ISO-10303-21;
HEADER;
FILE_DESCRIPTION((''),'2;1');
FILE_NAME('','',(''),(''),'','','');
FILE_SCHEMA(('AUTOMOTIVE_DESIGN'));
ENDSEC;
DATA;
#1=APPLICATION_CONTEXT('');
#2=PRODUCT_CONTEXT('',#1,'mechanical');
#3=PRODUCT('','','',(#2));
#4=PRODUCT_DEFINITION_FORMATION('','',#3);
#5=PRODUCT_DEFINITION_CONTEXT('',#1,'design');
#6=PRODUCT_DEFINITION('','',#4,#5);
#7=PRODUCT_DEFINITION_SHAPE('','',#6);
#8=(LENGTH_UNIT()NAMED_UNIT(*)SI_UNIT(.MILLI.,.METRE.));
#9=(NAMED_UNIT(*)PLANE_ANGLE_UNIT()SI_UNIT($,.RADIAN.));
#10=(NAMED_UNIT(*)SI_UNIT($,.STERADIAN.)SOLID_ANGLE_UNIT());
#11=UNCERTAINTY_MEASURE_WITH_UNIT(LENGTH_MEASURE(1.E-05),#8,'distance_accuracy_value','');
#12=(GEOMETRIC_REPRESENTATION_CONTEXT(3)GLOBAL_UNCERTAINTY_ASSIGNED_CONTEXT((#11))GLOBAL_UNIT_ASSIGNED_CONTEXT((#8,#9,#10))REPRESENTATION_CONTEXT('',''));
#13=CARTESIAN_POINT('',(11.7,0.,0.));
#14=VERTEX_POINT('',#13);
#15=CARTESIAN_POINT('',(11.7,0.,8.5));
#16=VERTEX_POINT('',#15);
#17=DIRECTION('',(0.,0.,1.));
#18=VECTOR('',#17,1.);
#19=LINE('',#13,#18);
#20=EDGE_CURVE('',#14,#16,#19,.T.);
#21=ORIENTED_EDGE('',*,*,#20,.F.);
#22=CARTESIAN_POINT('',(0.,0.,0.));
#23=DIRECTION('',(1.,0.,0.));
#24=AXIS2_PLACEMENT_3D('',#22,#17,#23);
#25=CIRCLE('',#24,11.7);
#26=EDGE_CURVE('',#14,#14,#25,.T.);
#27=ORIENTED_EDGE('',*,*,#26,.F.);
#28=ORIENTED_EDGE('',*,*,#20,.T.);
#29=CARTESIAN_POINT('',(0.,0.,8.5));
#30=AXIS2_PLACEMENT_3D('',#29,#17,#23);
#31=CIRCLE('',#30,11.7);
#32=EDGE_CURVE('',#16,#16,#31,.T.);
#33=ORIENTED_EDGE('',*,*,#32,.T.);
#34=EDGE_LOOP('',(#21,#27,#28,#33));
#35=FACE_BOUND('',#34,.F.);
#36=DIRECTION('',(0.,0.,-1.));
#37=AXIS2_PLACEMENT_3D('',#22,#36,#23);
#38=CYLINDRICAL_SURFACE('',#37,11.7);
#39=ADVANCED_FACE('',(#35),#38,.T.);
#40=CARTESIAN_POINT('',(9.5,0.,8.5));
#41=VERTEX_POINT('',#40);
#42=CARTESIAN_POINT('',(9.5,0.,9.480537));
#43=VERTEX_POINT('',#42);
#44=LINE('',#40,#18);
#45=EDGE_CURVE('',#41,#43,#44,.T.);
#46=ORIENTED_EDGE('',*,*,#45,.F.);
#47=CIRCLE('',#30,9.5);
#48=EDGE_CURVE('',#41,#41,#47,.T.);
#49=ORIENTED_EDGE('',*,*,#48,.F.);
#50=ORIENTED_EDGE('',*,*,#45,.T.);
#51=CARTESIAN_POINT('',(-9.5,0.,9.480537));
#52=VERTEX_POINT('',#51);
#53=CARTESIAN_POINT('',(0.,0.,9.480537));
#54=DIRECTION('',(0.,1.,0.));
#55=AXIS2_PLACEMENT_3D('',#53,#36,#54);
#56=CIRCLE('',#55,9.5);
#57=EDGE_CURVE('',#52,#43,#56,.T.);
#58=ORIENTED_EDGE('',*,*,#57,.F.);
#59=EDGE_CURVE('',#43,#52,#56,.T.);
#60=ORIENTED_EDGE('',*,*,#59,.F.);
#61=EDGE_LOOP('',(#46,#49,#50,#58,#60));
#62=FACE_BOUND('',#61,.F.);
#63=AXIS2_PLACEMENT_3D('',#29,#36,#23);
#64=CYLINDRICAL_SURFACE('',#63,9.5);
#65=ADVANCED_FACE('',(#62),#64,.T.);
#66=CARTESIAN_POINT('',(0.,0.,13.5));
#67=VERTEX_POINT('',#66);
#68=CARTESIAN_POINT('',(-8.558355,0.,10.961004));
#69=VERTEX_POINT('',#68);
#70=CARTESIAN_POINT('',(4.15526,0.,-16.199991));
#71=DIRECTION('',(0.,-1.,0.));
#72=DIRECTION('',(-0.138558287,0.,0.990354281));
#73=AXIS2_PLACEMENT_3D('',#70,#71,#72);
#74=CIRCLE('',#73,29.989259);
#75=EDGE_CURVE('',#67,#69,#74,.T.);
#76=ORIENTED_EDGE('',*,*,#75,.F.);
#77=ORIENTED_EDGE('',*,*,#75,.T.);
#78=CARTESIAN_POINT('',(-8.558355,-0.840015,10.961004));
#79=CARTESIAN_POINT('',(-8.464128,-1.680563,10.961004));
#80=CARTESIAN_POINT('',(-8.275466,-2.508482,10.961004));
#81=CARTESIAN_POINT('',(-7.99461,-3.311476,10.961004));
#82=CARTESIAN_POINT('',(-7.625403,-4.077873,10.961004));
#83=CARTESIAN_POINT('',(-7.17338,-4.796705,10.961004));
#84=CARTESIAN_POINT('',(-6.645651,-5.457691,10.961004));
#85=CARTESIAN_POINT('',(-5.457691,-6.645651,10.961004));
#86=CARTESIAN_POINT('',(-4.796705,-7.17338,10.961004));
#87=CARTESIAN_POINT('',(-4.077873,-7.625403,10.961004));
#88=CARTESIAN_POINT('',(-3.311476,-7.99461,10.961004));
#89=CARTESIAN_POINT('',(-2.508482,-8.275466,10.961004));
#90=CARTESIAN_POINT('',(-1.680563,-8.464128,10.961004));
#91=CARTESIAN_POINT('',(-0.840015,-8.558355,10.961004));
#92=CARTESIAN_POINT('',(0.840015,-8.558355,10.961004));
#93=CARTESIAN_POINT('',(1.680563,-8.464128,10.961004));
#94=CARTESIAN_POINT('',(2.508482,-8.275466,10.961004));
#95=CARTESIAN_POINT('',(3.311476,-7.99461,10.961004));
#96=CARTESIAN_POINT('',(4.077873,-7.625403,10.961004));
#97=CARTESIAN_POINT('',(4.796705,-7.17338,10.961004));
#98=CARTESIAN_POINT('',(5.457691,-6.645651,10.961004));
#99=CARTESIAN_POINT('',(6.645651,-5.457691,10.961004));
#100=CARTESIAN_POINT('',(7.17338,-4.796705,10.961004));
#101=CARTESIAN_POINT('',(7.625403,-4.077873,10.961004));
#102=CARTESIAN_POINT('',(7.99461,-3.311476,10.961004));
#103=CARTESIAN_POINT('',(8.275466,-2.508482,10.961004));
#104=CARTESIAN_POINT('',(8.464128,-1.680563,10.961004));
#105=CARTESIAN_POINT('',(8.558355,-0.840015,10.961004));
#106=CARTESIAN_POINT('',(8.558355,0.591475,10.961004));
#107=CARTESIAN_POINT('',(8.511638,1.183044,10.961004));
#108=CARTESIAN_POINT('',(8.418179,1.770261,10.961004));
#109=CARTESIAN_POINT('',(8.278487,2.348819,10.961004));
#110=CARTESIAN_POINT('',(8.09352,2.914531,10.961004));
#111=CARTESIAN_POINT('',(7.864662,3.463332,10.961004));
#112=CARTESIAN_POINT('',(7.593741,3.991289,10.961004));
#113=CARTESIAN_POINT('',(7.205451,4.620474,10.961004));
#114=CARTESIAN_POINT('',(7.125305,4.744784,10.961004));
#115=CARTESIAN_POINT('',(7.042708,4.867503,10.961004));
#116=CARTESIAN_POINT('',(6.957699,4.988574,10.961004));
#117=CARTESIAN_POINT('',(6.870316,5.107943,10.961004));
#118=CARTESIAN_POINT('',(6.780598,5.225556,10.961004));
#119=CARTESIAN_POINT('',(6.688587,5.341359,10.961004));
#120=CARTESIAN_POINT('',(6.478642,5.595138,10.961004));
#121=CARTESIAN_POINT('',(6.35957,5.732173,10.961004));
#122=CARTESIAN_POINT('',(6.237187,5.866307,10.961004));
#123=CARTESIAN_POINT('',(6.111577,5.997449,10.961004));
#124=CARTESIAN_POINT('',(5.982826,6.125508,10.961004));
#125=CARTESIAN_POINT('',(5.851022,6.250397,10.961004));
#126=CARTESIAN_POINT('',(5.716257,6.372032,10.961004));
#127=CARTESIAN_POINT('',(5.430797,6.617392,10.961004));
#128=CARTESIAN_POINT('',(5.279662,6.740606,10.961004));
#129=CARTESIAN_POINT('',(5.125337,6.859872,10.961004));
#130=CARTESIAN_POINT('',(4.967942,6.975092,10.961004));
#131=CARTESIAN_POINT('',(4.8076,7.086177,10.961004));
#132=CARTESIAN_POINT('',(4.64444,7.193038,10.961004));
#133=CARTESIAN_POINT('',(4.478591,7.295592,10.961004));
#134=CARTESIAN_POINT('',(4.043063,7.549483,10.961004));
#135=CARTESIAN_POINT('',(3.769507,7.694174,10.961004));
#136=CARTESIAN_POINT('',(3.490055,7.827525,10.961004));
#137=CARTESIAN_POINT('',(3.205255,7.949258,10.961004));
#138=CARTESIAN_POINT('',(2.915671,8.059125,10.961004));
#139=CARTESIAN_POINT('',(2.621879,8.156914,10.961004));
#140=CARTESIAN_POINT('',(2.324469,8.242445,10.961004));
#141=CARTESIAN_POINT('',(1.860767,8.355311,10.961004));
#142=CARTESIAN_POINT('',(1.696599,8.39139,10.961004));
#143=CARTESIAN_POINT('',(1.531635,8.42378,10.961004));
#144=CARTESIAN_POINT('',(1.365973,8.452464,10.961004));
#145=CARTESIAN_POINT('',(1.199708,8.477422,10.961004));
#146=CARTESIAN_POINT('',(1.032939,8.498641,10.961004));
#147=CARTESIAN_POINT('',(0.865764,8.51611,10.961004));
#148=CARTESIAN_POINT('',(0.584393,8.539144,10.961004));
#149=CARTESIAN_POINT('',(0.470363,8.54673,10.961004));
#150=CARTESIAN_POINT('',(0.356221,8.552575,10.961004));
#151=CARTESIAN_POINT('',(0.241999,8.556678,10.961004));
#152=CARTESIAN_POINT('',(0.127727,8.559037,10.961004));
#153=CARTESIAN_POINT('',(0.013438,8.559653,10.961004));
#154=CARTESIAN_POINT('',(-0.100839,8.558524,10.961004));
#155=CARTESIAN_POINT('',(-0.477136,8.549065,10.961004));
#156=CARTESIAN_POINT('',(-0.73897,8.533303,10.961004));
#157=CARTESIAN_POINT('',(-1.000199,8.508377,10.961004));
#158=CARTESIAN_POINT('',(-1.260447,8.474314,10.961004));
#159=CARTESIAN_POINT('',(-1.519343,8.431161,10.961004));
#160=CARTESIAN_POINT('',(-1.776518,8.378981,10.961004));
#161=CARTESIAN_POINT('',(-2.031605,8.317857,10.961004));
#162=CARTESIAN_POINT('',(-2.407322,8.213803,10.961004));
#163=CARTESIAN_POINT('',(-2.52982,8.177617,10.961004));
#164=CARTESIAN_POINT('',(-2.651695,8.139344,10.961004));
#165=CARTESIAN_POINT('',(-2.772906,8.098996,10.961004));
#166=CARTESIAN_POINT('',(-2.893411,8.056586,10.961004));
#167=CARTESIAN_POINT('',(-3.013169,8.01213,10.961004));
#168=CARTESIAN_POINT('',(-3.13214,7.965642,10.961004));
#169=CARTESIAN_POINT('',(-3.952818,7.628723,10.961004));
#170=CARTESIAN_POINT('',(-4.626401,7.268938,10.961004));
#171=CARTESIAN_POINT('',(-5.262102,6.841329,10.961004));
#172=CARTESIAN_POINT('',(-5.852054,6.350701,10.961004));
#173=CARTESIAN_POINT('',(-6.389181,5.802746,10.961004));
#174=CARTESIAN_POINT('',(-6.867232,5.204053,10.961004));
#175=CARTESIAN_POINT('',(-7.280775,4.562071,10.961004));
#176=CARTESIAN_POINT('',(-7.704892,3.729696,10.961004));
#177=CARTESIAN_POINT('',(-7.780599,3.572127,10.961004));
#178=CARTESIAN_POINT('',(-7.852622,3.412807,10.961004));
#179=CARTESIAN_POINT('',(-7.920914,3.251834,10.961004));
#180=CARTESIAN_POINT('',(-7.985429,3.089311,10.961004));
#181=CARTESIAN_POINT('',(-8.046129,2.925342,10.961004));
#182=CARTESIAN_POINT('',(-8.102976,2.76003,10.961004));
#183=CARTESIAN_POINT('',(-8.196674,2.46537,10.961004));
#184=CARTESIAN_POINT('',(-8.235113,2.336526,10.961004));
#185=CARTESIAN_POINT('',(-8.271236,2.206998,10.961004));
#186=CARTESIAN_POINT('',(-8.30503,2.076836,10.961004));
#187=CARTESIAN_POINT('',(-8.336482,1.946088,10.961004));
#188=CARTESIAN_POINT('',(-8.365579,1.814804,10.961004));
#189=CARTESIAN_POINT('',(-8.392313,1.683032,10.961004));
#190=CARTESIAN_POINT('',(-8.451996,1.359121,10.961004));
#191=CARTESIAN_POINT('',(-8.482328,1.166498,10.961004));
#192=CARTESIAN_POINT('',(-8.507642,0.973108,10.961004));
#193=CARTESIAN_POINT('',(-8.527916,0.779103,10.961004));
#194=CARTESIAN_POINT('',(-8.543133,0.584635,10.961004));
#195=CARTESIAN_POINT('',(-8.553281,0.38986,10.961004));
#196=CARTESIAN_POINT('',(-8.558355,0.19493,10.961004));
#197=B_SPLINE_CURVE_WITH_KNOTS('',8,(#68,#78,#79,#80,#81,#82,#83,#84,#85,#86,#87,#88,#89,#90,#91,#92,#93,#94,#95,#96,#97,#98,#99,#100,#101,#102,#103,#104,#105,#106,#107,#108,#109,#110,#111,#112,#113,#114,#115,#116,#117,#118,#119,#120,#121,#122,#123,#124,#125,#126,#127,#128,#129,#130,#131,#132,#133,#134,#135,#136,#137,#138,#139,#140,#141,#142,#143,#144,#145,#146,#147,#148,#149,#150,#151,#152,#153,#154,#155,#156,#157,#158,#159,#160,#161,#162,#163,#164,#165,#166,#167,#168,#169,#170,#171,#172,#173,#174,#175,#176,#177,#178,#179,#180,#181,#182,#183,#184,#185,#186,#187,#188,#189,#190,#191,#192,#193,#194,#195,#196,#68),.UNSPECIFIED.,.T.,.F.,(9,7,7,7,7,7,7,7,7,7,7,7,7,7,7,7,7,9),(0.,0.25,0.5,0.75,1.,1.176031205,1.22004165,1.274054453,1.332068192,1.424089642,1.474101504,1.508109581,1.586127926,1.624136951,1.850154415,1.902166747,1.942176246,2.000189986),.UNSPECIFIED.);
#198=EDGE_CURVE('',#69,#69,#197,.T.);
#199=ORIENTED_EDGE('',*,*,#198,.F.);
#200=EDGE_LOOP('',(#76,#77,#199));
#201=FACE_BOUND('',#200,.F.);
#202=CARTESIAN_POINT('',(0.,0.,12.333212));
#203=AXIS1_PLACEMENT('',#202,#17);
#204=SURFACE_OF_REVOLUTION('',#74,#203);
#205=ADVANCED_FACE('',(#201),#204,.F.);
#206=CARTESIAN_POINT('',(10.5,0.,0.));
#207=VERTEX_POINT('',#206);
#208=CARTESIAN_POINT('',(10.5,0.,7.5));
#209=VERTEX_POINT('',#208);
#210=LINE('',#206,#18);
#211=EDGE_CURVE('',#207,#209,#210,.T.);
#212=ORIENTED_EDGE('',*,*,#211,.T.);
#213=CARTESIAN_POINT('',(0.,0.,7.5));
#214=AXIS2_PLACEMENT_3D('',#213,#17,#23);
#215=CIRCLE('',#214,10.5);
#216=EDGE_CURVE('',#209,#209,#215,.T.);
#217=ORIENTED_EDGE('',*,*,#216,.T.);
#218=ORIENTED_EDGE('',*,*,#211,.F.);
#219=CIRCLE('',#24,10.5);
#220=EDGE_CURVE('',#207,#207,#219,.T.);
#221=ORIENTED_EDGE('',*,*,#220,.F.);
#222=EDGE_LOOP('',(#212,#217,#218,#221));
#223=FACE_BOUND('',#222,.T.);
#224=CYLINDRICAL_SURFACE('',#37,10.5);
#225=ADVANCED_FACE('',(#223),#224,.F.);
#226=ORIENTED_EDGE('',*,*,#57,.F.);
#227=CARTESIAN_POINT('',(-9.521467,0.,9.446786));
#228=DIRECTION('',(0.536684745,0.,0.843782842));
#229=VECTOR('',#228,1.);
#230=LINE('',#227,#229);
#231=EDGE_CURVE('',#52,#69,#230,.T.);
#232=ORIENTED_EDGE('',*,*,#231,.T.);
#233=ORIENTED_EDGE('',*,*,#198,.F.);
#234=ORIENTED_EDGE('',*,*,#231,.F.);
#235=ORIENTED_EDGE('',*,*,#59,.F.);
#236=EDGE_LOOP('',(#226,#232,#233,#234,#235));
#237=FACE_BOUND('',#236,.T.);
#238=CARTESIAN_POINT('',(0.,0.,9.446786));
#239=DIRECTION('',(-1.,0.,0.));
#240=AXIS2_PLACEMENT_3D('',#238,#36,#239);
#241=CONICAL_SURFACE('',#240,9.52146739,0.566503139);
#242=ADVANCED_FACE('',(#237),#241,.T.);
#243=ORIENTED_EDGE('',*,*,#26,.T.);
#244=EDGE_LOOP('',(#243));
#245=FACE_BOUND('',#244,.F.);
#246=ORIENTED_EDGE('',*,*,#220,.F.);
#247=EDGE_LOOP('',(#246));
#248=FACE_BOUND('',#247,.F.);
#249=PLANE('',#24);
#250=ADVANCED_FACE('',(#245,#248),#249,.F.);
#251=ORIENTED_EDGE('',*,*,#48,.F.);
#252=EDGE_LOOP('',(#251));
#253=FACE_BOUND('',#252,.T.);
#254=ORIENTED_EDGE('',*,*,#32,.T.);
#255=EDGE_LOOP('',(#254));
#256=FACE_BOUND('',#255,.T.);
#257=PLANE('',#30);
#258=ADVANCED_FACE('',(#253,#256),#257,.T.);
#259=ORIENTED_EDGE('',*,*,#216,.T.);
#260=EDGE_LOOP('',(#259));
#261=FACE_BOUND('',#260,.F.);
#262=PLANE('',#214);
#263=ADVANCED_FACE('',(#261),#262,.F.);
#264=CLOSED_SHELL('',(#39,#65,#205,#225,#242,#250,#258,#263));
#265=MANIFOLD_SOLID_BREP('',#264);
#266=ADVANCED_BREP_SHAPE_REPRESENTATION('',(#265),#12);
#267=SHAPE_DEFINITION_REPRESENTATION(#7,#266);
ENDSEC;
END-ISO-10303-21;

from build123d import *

# Parameters (mm, degrees)
F0_R        = 11.7
F0_R_2      = 10.5
F1_DEPTH    = 8.5
F2_DEPTH    = 7.5
F3_R        = 9.5
F4_DEPTH    = 2
F7_T2_ANGLE = 180
F7_T4_ANGLE = 180


# Not quite as in the source:
# - a fillet or chamfer that OpenCascade refuses, or shapes differently, is made with other operations: its cross-section is extruded or revolved along the edge and cut away or added
# - a feature names something its author has since deleted; it is built from what else it names


with BuildPart() as f1:
    # F0 (on Top) → F1 (new body)
    with BuildSketch(Plane.XY):
        Circle(F0_R)
        Circle(F0_R_2, mode=Mode.SUBTRACT)
        Circle(F0_R_2)
    extrude(amount=F1_DEPTH)

    # F0 (on Top) → F2 (cut)
    with BuildSketch(Plane.XY):
        Circle(F0_R_2)
    extrude(amount=F2_DEPTH, mode=Mode.SUBTRACT)

    # F3 (on face) → F4 (join)
    with BuildSketch(Plane.XY.offset(8.5)):
        Circle(F3_R)
    extrude(amount=F4_DEPTH)

    # F5 (on Front) → F6 (revolve)
    with BuildSketch(Plane.XZ):
        with BuildLine():
            Line((-9.5, 10.5), (0, 10.5))
            Line((0, 10.5), (0, 13.5))
            ThreePointArc((0, 13.5), (-4.8754462608, 12.3972464927), (-9.5, 10.5))
        make_face()
    revolve(axis=Axis((0, 0, 12.3332124203), (0, 0, 1)))

    # F7: chamfer of 1 on 2 edges, made by hand

    # F7_s1 → F7_t2 (revolve, cut)
    with BuildSketch(Plane.XZ):
        with BuildLine():
            Line((-9.5214673898, 9.4467860572), (-8.5368878452, 10.9947550164))
            Line((-8.5368878452, 10.9947550164), (-8.5453666245, 11.0128688316))
            ThreePointArc((-8.5453666245, 11.0128688316), (-9.0246542065, 10.7600809063), (-9.5091067674, 10.5178063693))
            Line((-9.5091067674, 10.5178063693), (-9.52, 10.5))
            ThreePointArc((-9.52, 10.5), (-9.52, 9.9733930286), (-9.5414673898, 9.4467860572))
            Line((-9.5414673898, 9.4467860572), (-9.5214673898, 9.4467860572))
        make_face()
    revolve(axis=Axis((0, 0, 10.5), (0, 0, 1)), revolution_arc=F7_T2_ANGLE, mode=Mode.SUBTRACT)

    # F7_s3 → F7_t4 (revolve, cut)
    with BuildSketch(Plane.XZ):
        with BuildLine():
            Line((9.5214673898, 9.4467860572), (8.5368878452, 10.9947550164))
            Line((8.5368878452, 10.9947550164), (8.5453666245, 11.0128688316))
            ThreePointArc((8.5453666245, 11.0128688316), (9.0246542065, 10.7600809063), (9.5091067674, 10.5178063693))
            Line((9.5091067674, 10.5178063693), (9.52, 10.5))
            ThreePointArc((9.52, 10.5), (9.52, 9.9733930286), (9.5414673898, 9.4467860572))
            Line((9.5414673898, 9.4467860572), (9.5214673898, 9.4467860572))
        make_face()
    revolve(axis=Axis((0, 0, 10.5), (0, 0, 1)), revolution_arc=F7_T4_ANGLE, mode=Mode.SUBTRACT)


solid = f1.part
